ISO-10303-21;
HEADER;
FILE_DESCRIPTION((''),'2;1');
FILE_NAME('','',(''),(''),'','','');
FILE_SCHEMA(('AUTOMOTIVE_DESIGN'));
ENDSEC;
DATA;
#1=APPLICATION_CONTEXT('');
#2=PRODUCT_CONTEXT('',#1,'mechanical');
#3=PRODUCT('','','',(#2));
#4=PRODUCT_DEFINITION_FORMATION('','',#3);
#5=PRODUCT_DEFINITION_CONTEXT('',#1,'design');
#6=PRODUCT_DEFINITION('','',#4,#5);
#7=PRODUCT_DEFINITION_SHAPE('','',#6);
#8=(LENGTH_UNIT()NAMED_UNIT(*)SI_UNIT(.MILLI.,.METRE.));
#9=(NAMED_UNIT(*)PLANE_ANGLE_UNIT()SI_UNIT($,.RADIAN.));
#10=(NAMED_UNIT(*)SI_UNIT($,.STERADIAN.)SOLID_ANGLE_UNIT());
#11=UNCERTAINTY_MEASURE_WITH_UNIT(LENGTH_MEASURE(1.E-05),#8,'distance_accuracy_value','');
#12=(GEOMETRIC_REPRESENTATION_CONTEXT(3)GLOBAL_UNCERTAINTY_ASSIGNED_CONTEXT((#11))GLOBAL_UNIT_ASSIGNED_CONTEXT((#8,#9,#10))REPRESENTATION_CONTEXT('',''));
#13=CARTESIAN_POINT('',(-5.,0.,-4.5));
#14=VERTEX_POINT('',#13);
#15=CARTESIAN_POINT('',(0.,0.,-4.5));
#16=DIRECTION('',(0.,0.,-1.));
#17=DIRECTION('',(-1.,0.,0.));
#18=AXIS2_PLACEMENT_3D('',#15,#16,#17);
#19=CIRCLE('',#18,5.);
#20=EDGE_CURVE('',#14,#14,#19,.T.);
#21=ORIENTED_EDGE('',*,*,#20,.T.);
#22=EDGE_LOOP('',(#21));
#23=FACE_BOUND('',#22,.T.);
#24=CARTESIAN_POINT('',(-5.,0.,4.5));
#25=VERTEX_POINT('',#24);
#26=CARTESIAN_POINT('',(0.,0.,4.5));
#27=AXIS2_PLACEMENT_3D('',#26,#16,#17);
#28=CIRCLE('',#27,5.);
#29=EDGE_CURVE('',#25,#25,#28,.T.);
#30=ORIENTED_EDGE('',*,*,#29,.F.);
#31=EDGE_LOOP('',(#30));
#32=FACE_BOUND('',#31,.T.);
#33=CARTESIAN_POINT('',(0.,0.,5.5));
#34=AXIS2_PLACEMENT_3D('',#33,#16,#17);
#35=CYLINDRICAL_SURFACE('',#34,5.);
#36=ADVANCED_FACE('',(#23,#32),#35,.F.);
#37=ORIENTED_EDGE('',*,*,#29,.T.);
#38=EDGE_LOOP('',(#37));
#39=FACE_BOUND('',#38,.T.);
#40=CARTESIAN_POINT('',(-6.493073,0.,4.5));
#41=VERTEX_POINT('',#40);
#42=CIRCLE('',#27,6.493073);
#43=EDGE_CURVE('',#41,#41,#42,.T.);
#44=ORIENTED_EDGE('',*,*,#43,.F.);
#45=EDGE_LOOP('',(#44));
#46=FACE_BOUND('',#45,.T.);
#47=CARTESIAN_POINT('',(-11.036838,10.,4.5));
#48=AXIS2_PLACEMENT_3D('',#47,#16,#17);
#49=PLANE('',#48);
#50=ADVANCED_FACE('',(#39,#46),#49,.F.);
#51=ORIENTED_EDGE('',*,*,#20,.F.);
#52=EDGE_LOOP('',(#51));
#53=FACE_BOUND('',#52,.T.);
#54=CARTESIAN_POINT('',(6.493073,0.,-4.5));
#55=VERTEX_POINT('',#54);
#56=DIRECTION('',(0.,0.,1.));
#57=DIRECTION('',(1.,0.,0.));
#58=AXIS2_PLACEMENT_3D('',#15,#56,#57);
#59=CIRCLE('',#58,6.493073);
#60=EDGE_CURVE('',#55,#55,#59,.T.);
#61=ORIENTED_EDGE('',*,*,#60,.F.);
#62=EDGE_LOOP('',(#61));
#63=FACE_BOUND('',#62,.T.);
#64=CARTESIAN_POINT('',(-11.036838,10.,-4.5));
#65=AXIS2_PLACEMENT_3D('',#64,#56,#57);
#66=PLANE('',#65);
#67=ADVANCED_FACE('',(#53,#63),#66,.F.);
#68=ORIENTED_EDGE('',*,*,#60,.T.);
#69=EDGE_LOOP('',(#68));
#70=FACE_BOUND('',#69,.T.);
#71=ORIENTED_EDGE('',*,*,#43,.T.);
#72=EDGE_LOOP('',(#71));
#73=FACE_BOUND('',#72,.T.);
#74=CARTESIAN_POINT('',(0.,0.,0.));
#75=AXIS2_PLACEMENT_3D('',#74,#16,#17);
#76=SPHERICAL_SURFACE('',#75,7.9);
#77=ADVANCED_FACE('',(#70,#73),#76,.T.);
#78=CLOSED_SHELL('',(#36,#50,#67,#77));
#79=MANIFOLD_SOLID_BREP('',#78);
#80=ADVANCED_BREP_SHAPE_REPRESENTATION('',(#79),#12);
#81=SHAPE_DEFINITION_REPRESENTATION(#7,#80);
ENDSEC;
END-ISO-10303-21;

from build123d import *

# Parameters (mm, degrees)
CUT_EXTRUDE_1_DEPTH      = 10
CUT_EXTRUDE_1_DEPTH_BACK = 10
SKETCH_2_OUTSIDE_W       = 23.274
SKETCH_2_OUTSIDE_H       = 23.274
SKETCH_2_OUTSIDE_W_2     = 21.284245121
SKETCH_2_OUTSIDE_H_2     = 9
SKETCH_3_R               = 5
CUT_EXTRUDE_2_DEPTH      = 10


with BuildPart() as part:
    # 草图1 → 旋转1 (revolve)
    with BuildSketch(Plane(origin=(0, 0, 0), x_dir=(1, 0, 0), z_dir=(0, 1, 0))):
        with BuildLine():
            ThreePointArc((7.9, 0), (0, 7.9), (-7.9, 0))
            Line((-7.9, 0), (7.9, 0))
        make_face()
    revolve(axis=Axis((-7.9, 0, 0), (1, 0, 0)))

    # 草图2 outside → 切除-拉伸1 (cut, two sides: drawn at the far end of the back side and taken through both)
    with BuildSketch(Plane(origin=(0, 0, 0), x_dir=(1, 0, 0), z_dir=(0, 1, 0)).offset(-CUT_EXTRUDE_1_DEPTH_BACK)):
        Rectangle(SKETCH_2_OUTSIDE_W, SKETCH_2_OUTSIDE_H)
        with Locations((-0.394714959, 0)):
            Rectangle(SKETCH_2_OUTSIDE_W_2, SKETCH_2_OUTSIDE_H_2, mode=Mode.SUBTRACT)
    extrude(amount=CUT_EXTRUDE_1_DEPTH + CUT_EXTRUDE_1_DEPTH_BACK, mode=Mode.SUBTRACT)

    # 草图3 → 切除-拉伸2 (cut)
    with BuildSketch(Plane(origin=(0, 0, -4.5), x_dir=(-1, 0, 0), z_dir=(0, 0, -1))):
        Circle(SKETCH_3_R)
    extrude(amount=-CUT_EXTRUDE_2_DEPTH, mode=Mode.SUBTRACT)


solid = part.part
